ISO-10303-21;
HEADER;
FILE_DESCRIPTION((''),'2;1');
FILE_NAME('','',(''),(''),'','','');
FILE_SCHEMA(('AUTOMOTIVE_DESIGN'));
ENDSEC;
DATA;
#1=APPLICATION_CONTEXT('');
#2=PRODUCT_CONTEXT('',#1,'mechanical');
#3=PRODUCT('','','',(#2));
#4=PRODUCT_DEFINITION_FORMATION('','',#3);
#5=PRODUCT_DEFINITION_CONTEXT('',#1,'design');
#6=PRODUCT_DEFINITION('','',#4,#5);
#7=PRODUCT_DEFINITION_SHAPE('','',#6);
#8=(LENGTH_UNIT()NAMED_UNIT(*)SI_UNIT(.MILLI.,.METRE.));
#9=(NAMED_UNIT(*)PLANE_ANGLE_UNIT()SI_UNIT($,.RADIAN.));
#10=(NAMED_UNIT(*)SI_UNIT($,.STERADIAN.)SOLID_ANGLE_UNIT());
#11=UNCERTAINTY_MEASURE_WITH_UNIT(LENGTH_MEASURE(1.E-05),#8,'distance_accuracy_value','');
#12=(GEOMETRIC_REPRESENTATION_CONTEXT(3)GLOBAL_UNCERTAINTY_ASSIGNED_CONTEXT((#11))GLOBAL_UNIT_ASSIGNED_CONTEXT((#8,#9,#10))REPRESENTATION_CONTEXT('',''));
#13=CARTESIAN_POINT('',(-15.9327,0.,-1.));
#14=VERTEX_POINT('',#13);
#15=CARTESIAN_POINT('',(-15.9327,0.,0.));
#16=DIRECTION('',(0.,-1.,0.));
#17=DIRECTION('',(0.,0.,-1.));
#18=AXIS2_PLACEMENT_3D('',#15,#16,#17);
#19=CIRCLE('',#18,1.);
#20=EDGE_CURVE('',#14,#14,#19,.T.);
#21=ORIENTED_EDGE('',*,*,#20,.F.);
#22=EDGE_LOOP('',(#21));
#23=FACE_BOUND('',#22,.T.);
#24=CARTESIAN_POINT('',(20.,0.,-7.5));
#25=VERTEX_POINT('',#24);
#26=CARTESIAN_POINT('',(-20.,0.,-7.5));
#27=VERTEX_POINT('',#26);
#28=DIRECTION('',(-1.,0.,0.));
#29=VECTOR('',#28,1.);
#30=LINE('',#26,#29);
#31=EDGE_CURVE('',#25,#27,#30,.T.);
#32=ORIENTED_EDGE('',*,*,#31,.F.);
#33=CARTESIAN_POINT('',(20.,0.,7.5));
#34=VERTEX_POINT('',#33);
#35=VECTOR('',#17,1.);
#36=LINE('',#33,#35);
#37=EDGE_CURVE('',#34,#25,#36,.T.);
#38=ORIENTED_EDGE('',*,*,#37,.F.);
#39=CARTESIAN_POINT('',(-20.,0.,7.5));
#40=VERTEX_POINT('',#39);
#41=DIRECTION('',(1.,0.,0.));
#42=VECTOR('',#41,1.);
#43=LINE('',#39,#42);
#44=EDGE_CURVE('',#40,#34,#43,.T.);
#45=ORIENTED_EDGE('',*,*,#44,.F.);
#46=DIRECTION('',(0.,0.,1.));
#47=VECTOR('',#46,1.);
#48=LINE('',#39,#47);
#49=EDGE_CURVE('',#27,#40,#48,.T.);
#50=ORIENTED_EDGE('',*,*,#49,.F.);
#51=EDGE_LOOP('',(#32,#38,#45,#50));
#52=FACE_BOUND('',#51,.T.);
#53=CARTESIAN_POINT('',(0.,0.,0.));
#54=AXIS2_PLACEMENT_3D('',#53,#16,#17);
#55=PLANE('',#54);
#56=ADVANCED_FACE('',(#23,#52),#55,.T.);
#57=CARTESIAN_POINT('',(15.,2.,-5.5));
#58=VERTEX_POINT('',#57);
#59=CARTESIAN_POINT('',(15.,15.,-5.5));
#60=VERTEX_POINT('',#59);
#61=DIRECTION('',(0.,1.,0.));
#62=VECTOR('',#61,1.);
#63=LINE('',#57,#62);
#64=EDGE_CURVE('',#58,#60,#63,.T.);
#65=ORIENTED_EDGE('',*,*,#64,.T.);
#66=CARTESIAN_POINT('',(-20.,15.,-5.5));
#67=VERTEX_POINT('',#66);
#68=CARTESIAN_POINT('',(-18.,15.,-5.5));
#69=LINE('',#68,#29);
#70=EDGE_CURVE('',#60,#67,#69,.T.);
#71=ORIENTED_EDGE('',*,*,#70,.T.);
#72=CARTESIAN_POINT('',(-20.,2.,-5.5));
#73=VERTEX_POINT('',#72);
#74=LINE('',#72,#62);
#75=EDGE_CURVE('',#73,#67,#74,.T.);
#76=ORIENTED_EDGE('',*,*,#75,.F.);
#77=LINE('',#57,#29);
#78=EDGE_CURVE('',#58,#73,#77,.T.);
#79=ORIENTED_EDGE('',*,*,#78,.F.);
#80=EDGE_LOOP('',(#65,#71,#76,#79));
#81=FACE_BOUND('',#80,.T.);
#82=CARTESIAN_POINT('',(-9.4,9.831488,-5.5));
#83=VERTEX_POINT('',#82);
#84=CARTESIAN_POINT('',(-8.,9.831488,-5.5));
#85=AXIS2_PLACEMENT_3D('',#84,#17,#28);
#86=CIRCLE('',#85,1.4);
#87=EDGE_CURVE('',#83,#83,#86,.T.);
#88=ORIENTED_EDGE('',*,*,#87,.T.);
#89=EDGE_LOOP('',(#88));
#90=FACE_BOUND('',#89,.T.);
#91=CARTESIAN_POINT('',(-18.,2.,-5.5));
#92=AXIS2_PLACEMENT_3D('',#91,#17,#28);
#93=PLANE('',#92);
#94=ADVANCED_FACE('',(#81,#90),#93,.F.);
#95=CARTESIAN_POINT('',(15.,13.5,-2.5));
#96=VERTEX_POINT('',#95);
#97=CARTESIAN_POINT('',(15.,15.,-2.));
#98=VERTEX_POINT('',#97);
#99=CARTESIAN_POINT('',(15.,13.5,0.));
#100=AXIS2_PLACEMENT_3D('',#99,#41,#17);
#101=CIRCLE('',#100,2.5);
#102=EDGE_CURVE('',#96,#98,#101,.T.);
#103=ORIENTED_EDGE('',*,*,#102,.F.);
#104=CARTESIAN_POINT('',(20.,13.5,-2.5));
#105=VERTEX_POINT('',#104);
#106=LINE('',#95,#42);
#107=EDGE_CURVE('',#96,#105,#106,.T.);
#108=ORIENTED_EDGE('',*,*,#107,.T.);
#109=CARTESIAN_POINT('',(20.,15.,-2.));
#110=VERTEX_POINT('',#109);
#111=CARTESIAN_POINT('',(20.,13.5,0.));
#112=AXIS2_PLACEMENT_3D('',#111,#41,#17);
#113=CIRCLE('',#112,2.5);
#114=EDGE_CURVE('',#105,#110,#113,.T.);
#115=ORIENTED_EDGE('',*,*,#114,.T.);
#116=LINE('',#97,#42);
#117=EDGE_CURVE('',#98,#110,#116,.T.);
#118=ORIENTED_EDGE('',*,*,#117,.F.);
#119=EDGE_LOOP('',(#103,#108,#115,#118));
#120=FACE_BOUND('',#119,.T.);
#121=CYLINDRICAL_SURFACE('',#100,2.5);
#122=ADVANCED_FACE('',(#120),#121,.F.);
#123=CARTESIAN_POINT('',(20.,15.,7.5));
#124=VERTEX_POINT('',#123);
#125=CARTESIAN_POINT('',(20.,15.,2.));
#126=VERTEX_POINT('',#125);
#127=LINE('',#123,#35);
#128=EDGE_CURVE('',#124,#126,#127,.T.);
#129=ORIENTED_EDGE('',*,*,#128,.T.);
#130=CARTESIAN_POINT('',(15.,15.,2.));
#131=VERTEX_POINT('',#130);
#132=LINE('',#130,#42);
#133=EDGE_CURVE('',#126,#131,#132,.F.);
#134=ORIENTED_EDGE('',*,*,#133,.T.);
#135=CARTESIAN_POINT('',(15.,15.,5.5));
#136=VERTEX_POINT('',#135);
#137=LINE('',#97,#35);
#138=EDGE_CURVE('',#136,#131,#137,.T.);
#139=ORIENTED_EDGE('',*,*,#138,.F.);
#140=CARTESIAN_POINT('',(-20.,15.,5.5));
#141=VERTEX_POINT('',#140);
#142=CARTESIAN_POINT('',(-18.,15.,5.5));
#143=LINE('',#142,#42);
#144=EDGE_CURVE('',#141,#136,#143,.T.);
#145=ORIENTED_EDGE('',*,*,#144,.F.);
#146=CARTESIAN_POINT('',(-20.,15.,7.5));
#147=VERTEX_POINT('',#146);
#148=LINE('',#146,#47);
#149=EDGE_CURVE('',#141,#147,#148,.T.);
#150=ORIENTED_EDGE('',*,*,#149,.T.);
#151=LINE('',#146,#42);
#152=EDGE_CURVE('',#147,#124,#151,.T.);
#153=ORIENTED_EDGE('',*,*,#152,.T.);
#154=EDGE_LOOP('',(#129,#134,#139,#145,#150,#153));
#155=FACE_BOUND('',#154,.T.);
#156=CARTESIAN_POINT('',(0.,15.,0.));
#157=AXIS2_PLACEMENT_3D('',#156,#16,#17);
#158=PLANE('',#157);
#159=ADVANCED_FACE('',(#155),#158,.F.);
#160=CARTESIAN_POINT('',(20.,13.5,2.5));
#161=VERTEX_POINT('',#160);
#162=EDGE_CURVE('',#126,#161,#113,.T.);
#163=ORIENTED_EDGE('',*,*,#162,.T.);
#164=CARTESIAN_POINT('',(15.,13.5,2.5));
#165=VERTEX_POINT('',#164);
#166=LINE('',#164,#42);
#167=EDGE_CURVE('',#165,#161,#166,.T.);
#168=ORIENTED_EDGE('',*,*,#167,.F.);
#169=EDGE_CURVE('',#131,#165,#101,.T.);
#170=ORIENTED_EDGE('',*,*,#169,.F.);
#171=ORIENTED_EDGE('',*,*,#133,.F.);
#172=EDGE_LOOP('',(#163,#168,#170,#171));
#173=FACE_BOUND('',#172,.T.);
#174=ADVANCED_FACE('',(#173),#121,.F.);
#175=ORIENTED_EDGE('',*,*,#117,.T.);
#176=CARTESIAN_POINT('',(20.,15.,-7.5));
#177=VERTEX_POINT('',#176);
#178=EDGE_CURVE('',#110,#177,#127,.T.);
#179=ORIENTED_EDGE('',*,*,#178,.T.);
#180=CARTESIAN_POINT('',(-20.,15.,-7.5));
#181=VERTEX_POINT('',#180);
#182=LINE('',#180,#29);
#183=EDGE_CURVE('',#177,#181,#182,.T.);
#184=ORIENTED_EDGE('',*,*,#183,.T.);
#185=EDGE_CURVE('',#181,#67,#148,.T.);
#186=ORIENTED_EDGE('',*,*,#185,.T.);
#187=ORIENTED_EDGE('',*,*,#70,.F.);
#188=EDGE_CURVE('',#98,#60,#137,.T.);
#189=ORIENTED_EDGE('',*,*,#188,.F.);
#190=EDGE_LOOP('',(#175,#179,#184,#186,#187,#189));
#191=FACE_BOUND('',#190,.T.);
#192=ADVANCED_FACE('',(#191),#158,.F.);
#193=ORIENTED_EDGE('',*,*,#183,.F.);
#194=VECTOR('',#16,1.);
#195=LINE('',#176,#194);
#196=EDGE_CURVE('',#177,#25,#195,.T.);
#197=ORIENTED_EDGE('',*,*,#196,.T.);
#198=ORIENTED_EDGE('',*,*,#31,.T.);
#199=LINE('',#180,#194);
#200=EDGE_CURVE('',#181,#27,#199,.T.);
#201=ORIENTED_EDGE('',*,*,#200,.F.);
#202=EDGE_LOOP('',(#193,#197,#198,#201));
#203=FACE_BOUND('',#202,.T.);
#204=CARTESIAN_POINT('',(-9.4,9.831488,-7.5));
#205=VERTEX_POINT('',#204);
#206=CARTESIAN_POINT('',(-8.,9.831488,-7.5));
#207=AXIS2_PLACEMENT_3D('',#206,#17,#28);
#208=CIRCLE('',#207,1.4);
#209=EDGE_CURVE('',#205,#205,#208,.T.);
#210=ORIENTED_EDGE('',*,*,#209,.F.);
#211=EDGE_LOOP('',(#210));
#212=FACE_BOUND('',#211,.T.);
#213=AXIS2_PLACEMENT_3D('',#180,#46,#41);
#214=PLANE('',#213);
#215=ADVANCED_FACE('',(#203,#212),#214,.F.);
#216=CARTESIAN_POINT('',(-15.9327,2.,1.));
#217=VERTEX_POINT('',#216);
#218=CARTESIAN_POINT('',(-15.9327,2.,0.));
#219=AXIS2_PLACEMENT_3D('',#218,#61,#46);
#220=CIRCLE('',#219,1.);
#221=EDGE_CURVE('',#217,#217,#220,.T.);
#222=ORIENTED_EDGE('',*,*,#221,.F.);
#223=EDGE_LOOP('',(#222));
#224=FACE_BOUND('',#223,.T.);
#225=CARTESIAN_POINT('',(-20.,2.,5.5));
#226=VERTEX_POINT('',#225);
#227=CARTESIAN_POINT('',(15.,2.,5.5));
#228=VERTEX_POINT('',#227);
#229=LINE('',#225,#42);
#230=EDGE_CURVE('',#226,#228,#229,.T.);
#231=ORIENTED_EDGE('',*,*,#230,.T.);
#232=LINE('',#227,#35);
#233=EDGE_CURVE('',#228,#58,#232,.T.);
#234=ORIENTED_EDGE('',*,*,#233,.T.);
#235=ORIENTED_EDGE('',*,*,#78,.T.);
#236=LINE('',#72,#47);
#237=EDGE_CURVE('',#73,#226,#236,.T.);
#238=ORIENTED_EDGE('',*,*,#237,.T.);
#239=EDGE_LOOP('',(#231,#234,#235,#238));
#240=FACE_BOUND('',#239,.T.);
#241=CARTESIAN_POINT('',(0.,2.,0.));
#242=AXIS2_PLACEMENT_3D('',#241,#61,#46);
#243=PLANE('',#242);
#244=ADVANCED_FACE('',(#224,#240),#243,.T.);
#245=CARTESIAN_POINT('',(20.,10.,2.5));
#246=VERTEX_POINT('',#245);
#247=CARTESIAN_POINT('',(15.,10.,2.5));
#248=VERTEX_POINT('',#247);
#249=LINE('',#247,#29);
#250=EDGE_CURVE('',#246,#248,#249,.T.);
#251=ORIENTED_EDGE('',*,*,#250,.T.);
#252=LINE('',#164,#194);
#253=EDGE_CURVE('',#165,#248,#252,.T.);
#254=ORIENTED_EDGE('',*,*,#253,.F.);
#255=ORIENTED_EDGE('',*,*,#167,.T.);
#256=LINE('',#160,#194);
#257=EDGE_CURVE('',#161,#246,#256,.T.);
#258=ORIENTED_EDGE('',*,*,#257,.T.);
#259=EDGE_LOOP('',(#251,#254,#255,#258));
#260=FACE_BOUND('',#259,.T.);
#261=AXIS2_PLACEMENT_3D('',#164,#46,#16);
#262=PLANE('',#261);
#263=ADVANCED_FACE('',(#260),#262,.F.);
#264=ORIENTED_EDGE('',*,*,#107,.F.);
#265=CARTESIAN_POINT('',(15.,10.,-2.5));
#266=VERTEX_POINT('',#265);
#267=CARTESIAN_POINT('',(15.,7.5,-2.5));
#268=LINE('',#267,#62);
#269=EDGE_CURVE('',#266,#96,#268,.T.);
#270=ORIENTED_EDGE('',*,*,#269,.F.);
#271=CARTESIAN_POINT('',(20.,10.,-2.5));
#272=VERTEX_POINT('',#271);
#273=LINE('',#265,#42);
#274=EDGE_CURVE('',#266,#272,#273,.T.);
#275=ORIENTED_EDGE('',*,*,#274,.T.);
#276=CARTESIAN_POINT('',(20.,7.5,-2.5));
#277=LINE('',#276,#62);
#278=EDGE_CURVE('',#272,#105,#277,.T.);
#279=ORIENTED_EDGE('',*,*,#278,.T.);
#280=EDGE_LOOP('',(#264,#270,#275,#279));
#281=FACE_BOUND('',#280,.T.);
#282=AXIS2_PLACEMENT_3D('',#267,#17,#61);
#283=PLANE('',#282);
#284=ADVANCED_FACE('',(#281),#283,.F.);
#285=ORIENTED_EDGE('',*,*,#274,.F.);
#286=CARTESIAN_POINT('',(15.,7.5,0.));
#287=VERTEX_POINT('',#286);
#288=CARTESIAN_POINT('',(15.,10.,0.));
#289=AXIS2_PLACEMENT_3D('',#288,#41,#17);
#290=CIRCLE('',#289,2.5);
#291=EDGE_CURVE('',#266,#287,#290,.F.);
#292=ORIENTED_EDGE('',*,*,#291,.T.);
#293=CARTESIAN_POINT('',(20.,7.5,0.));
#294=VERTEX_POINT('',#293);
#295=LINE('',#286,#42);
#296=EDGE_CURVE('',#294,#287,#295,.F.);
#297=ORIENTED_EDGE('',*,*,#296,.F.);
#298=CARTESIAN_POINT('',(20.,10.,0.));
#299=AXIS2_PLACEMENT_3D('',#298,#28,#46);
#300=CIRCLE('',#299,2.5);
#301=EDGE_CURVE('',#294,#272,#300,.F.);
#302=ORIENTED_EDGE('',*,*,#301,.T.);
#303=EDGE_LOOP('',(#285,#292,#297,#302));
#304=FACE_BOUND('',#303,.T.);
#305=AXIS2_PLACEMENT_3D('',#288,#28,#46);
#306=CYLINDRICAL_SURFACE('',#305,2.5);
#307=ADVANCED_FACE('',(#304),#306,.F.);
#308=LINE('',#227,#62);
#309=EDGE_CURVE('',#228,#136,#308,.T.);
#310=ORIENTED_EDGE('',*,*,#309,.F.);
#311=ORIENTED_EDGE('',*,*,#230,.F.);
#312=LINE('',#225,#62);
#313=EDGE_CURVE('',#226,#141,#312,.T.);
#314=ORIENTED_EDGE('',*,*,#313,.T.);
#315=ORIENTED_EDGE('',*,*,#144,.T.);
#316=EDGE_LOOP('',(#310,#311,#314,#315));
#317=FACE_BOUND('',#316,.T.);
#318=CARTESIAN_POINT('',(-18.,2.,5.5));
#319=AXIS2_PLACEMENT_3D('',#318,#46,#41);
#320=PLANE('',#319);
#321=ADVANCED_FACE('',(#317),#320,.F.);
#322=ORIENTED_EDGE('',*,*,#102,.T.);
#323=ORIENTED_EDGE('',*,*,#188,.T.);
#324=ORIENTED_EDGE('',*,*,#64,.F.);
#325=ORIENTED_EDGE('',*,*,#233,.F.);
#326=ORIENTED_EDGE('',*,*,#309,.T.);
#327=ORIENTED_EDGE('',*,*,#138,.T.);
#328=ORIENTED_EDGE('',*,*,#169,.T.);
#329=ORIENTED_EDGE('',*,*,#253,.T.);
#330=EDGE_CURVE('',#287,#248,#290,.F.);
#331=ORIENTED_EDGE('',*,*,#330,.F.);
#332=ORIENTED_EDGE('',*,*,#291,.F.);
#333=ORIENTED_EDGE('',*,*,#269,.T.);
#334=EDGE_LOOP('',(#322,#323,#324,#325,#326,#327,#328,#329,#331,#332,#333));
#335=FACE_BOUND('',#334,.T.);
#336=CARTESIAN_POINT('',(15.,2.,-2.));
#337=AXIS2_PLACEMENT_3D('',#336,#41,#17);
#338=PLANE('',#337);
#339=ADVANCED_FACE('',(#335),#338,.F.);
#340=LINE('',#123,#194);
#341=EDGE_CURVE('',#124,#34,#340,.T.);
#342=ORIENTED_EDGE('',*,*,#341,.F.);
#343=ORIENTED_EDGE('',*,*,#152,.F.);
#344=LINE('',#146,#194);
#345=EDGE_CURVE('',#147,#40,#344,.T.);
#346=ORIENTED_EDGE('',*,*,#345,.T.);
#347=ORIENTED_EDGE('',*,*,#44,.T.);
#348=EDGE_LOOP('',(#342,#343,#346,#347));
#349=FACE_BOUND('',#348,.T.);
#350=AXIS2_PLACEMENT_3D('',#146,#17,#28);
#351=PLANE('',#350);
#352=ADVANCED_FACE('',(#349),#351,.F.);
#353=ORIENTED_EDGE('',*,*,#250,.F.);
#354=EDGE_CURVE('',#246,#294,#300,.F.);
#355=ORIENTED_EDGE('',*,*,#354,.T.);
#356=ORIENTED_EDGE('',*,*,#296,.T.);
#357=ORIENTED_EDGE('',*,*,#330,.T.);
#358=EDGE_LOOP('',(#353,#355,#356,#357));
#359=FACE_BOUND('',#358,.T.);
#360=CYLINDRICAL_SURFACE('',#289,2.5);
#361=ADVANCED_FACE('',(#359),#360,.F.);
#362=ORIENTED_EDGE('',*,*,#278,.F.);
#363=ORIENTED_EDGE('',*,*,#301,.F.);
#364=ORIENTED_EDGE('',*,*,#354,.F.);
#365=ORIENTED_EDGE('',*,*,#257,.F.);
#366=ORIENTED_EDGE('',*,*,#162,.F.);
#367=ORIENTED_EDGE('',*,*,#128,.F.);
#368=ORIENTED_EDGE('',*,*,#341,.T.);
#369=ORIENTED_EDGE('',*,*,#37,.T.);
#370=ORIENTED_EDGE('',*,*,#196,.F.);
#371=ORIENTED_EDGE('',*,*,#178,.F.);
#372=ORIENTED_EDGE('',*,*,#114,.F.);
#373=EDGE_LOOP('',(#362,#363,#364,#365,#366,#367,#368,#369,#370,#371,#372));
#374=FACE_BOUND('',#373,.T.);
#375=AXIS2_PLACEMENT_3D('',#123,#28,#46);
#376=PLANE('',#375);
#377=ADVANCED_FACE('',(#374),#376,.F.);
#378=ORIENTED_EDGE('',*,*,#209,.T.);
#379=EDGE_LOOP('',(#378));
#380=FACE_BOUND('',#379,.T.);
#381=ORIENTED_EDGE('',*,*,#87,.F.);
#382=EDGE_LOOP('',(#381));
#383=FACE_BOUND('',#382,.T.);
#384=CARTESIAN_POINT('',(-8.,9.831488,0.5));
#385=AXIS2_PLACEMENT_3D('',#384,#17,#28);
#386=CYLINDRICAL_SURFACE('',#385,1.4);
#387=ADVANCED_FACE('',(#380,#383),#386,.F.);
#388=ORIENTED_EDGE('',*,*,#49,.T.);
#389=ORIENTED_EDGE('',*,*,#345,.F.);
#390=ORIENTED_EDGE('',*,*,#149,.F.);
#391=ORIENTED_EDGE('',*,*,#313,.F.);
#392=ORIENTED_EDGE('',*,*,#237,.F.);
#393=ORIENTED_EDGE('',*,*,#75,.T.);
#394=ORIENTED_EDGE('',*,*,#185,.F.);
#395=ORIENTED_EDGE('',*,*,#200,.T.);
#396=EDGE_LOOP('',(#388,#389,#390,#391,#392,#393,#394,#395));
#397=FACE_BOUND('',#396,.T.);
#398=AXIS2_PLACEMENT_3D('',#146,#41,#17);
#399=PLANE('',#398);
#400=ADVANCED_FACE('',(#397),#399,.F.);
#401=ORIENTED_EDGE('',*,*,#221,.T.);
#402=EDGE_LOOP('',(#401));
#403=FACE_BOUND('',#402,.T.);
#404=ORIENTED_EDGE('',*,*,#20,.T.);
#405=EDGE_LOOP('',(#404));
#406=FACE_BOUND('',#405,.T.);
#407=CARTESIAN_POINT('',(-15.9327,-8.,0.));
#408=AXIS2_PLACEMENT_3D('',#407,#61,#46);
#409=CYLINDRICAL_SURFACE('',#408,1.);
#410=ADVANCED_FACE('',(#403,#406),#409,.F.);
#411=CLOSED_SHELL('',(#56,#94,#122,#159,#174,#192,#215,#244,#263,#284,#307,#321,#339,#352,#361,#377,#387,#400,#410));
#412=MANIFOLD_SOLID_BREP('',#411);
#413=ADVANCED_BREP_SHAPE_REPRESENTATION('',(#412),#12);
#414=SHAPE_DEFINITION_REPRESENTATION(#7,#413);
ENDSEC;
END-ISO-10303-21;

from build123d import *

# Parameters (mm, degrees)
SKETCH1_W           = 40
SKETCH1_H           = 15
BOSS_EXTRUDE1_DEPTH = 15
CUT_EXTRUDE1_DEPTH  = 5
CUT_EXTRUDE2_DEPTH  = 13
FILLET3_R           = 2.5
FILLET4_R           = 2.5
SKETCH4_R           = 1.4
CUT_EXTRUDE3_DEPTH  = 8
SKETCH5_R           = 1
CUT_EXTRUDE4_DEPTH  = 10


with BuildPart() as part:
    # Sketch1 → Boss-Extrude1 (new body)
    with BuildSketch(Plane(origin=(0, 0, 0), x_dir=(1, 0, 0), z_dir=(0, 1, 0))):
        Rectangle(SKETCH1_W, SKETCH1_H)
    extrude(amount=BOSS_EXTRUDE1_DEPTH)

    # Sketch2 → Cut-Extrude1 (cut)
    with BuildSketch(Plane(origin=(20, 0, 0), x_dir=(0, 0, -1), z_dir=(1, 0, 0))):
        with BuildLine():
            Line((-2.5, 13.5), (-2.5, 7.5))
            Line((-2.5, 7.5), (2.5, 7.5))
            Line((2.5, 7.5), (2.5, 13.5))
            ThreePointArc((2.5, 13.5), (0, 16), (-2.5, 13.5))
        make_face()
    extrude(amount=-CUT_EXTRUDE1_DEPTH, mode=Mode.SUBTRACT)

    # Sketch3 → Cut-Extrude2 (cut)
    with BuildSketch(Plane(origin=(0, 15, 0), x_dir=(1, 0, 0), z_dir=(0, 1, 0))):
        Polygon((-18, 5.5), (-20, 5.5), (-20, -5.5), (-18, -5.5), (15, -5.5), (15, 2), (15, 5.5), align=None)
    extrude(amount=-CUT_EXTRUDE2_DEPTH, mode=Mode.SUBTRACT)

    # Fillet3
    fillet3_edges = [part.edges().sort_by_distance(p)[0] for p in [
        (17.5, 7.5, -2.5),
    ]]
    fillet(fillet3_edges, radius=FILLET3_R)

    # Fillet4
    fillet4_edges = [part.edges().sort_by_distance(p)[0] for p in [
        (17.5, 7.5, 2.5),
    ]]
    fillet(fillet4_edges, radius=FILLET4_R - 0.0001)  # a hair under: the kernel refuses the full size

    # Sketch4 → Cut-Extrude3 (cut)
    with BuildSketch(Plane(origin=(-14.629961684, 3.541693354, -7.5), x_dir=(-1, 0, 0), z_dir=(0, 0, -1))):
        with Locations((-6.629961684, 6.289794724)):
            Circle(SKETCH4_R)
    extrude(amount=-CUT_EXTRUDE3_DEPTH, mode=Mode.SUBTRACT)

    # Sketch5 → Cut-Extrude4 (cut)
    with BuildSketch(Plane(origin=(0, 2, 0), x_dir=(1, 0, 0), z_dir=(0, 1, 0))):
        with Locations(Location((-15.932700141, 0, 0), (0, 0, 270))):
            Circle(SKETCH5_R)
    extrude(amount=-CUT_EXTRUDE4_DEPTH, mode=Mode.SUBTRACT)


solid = part.part
